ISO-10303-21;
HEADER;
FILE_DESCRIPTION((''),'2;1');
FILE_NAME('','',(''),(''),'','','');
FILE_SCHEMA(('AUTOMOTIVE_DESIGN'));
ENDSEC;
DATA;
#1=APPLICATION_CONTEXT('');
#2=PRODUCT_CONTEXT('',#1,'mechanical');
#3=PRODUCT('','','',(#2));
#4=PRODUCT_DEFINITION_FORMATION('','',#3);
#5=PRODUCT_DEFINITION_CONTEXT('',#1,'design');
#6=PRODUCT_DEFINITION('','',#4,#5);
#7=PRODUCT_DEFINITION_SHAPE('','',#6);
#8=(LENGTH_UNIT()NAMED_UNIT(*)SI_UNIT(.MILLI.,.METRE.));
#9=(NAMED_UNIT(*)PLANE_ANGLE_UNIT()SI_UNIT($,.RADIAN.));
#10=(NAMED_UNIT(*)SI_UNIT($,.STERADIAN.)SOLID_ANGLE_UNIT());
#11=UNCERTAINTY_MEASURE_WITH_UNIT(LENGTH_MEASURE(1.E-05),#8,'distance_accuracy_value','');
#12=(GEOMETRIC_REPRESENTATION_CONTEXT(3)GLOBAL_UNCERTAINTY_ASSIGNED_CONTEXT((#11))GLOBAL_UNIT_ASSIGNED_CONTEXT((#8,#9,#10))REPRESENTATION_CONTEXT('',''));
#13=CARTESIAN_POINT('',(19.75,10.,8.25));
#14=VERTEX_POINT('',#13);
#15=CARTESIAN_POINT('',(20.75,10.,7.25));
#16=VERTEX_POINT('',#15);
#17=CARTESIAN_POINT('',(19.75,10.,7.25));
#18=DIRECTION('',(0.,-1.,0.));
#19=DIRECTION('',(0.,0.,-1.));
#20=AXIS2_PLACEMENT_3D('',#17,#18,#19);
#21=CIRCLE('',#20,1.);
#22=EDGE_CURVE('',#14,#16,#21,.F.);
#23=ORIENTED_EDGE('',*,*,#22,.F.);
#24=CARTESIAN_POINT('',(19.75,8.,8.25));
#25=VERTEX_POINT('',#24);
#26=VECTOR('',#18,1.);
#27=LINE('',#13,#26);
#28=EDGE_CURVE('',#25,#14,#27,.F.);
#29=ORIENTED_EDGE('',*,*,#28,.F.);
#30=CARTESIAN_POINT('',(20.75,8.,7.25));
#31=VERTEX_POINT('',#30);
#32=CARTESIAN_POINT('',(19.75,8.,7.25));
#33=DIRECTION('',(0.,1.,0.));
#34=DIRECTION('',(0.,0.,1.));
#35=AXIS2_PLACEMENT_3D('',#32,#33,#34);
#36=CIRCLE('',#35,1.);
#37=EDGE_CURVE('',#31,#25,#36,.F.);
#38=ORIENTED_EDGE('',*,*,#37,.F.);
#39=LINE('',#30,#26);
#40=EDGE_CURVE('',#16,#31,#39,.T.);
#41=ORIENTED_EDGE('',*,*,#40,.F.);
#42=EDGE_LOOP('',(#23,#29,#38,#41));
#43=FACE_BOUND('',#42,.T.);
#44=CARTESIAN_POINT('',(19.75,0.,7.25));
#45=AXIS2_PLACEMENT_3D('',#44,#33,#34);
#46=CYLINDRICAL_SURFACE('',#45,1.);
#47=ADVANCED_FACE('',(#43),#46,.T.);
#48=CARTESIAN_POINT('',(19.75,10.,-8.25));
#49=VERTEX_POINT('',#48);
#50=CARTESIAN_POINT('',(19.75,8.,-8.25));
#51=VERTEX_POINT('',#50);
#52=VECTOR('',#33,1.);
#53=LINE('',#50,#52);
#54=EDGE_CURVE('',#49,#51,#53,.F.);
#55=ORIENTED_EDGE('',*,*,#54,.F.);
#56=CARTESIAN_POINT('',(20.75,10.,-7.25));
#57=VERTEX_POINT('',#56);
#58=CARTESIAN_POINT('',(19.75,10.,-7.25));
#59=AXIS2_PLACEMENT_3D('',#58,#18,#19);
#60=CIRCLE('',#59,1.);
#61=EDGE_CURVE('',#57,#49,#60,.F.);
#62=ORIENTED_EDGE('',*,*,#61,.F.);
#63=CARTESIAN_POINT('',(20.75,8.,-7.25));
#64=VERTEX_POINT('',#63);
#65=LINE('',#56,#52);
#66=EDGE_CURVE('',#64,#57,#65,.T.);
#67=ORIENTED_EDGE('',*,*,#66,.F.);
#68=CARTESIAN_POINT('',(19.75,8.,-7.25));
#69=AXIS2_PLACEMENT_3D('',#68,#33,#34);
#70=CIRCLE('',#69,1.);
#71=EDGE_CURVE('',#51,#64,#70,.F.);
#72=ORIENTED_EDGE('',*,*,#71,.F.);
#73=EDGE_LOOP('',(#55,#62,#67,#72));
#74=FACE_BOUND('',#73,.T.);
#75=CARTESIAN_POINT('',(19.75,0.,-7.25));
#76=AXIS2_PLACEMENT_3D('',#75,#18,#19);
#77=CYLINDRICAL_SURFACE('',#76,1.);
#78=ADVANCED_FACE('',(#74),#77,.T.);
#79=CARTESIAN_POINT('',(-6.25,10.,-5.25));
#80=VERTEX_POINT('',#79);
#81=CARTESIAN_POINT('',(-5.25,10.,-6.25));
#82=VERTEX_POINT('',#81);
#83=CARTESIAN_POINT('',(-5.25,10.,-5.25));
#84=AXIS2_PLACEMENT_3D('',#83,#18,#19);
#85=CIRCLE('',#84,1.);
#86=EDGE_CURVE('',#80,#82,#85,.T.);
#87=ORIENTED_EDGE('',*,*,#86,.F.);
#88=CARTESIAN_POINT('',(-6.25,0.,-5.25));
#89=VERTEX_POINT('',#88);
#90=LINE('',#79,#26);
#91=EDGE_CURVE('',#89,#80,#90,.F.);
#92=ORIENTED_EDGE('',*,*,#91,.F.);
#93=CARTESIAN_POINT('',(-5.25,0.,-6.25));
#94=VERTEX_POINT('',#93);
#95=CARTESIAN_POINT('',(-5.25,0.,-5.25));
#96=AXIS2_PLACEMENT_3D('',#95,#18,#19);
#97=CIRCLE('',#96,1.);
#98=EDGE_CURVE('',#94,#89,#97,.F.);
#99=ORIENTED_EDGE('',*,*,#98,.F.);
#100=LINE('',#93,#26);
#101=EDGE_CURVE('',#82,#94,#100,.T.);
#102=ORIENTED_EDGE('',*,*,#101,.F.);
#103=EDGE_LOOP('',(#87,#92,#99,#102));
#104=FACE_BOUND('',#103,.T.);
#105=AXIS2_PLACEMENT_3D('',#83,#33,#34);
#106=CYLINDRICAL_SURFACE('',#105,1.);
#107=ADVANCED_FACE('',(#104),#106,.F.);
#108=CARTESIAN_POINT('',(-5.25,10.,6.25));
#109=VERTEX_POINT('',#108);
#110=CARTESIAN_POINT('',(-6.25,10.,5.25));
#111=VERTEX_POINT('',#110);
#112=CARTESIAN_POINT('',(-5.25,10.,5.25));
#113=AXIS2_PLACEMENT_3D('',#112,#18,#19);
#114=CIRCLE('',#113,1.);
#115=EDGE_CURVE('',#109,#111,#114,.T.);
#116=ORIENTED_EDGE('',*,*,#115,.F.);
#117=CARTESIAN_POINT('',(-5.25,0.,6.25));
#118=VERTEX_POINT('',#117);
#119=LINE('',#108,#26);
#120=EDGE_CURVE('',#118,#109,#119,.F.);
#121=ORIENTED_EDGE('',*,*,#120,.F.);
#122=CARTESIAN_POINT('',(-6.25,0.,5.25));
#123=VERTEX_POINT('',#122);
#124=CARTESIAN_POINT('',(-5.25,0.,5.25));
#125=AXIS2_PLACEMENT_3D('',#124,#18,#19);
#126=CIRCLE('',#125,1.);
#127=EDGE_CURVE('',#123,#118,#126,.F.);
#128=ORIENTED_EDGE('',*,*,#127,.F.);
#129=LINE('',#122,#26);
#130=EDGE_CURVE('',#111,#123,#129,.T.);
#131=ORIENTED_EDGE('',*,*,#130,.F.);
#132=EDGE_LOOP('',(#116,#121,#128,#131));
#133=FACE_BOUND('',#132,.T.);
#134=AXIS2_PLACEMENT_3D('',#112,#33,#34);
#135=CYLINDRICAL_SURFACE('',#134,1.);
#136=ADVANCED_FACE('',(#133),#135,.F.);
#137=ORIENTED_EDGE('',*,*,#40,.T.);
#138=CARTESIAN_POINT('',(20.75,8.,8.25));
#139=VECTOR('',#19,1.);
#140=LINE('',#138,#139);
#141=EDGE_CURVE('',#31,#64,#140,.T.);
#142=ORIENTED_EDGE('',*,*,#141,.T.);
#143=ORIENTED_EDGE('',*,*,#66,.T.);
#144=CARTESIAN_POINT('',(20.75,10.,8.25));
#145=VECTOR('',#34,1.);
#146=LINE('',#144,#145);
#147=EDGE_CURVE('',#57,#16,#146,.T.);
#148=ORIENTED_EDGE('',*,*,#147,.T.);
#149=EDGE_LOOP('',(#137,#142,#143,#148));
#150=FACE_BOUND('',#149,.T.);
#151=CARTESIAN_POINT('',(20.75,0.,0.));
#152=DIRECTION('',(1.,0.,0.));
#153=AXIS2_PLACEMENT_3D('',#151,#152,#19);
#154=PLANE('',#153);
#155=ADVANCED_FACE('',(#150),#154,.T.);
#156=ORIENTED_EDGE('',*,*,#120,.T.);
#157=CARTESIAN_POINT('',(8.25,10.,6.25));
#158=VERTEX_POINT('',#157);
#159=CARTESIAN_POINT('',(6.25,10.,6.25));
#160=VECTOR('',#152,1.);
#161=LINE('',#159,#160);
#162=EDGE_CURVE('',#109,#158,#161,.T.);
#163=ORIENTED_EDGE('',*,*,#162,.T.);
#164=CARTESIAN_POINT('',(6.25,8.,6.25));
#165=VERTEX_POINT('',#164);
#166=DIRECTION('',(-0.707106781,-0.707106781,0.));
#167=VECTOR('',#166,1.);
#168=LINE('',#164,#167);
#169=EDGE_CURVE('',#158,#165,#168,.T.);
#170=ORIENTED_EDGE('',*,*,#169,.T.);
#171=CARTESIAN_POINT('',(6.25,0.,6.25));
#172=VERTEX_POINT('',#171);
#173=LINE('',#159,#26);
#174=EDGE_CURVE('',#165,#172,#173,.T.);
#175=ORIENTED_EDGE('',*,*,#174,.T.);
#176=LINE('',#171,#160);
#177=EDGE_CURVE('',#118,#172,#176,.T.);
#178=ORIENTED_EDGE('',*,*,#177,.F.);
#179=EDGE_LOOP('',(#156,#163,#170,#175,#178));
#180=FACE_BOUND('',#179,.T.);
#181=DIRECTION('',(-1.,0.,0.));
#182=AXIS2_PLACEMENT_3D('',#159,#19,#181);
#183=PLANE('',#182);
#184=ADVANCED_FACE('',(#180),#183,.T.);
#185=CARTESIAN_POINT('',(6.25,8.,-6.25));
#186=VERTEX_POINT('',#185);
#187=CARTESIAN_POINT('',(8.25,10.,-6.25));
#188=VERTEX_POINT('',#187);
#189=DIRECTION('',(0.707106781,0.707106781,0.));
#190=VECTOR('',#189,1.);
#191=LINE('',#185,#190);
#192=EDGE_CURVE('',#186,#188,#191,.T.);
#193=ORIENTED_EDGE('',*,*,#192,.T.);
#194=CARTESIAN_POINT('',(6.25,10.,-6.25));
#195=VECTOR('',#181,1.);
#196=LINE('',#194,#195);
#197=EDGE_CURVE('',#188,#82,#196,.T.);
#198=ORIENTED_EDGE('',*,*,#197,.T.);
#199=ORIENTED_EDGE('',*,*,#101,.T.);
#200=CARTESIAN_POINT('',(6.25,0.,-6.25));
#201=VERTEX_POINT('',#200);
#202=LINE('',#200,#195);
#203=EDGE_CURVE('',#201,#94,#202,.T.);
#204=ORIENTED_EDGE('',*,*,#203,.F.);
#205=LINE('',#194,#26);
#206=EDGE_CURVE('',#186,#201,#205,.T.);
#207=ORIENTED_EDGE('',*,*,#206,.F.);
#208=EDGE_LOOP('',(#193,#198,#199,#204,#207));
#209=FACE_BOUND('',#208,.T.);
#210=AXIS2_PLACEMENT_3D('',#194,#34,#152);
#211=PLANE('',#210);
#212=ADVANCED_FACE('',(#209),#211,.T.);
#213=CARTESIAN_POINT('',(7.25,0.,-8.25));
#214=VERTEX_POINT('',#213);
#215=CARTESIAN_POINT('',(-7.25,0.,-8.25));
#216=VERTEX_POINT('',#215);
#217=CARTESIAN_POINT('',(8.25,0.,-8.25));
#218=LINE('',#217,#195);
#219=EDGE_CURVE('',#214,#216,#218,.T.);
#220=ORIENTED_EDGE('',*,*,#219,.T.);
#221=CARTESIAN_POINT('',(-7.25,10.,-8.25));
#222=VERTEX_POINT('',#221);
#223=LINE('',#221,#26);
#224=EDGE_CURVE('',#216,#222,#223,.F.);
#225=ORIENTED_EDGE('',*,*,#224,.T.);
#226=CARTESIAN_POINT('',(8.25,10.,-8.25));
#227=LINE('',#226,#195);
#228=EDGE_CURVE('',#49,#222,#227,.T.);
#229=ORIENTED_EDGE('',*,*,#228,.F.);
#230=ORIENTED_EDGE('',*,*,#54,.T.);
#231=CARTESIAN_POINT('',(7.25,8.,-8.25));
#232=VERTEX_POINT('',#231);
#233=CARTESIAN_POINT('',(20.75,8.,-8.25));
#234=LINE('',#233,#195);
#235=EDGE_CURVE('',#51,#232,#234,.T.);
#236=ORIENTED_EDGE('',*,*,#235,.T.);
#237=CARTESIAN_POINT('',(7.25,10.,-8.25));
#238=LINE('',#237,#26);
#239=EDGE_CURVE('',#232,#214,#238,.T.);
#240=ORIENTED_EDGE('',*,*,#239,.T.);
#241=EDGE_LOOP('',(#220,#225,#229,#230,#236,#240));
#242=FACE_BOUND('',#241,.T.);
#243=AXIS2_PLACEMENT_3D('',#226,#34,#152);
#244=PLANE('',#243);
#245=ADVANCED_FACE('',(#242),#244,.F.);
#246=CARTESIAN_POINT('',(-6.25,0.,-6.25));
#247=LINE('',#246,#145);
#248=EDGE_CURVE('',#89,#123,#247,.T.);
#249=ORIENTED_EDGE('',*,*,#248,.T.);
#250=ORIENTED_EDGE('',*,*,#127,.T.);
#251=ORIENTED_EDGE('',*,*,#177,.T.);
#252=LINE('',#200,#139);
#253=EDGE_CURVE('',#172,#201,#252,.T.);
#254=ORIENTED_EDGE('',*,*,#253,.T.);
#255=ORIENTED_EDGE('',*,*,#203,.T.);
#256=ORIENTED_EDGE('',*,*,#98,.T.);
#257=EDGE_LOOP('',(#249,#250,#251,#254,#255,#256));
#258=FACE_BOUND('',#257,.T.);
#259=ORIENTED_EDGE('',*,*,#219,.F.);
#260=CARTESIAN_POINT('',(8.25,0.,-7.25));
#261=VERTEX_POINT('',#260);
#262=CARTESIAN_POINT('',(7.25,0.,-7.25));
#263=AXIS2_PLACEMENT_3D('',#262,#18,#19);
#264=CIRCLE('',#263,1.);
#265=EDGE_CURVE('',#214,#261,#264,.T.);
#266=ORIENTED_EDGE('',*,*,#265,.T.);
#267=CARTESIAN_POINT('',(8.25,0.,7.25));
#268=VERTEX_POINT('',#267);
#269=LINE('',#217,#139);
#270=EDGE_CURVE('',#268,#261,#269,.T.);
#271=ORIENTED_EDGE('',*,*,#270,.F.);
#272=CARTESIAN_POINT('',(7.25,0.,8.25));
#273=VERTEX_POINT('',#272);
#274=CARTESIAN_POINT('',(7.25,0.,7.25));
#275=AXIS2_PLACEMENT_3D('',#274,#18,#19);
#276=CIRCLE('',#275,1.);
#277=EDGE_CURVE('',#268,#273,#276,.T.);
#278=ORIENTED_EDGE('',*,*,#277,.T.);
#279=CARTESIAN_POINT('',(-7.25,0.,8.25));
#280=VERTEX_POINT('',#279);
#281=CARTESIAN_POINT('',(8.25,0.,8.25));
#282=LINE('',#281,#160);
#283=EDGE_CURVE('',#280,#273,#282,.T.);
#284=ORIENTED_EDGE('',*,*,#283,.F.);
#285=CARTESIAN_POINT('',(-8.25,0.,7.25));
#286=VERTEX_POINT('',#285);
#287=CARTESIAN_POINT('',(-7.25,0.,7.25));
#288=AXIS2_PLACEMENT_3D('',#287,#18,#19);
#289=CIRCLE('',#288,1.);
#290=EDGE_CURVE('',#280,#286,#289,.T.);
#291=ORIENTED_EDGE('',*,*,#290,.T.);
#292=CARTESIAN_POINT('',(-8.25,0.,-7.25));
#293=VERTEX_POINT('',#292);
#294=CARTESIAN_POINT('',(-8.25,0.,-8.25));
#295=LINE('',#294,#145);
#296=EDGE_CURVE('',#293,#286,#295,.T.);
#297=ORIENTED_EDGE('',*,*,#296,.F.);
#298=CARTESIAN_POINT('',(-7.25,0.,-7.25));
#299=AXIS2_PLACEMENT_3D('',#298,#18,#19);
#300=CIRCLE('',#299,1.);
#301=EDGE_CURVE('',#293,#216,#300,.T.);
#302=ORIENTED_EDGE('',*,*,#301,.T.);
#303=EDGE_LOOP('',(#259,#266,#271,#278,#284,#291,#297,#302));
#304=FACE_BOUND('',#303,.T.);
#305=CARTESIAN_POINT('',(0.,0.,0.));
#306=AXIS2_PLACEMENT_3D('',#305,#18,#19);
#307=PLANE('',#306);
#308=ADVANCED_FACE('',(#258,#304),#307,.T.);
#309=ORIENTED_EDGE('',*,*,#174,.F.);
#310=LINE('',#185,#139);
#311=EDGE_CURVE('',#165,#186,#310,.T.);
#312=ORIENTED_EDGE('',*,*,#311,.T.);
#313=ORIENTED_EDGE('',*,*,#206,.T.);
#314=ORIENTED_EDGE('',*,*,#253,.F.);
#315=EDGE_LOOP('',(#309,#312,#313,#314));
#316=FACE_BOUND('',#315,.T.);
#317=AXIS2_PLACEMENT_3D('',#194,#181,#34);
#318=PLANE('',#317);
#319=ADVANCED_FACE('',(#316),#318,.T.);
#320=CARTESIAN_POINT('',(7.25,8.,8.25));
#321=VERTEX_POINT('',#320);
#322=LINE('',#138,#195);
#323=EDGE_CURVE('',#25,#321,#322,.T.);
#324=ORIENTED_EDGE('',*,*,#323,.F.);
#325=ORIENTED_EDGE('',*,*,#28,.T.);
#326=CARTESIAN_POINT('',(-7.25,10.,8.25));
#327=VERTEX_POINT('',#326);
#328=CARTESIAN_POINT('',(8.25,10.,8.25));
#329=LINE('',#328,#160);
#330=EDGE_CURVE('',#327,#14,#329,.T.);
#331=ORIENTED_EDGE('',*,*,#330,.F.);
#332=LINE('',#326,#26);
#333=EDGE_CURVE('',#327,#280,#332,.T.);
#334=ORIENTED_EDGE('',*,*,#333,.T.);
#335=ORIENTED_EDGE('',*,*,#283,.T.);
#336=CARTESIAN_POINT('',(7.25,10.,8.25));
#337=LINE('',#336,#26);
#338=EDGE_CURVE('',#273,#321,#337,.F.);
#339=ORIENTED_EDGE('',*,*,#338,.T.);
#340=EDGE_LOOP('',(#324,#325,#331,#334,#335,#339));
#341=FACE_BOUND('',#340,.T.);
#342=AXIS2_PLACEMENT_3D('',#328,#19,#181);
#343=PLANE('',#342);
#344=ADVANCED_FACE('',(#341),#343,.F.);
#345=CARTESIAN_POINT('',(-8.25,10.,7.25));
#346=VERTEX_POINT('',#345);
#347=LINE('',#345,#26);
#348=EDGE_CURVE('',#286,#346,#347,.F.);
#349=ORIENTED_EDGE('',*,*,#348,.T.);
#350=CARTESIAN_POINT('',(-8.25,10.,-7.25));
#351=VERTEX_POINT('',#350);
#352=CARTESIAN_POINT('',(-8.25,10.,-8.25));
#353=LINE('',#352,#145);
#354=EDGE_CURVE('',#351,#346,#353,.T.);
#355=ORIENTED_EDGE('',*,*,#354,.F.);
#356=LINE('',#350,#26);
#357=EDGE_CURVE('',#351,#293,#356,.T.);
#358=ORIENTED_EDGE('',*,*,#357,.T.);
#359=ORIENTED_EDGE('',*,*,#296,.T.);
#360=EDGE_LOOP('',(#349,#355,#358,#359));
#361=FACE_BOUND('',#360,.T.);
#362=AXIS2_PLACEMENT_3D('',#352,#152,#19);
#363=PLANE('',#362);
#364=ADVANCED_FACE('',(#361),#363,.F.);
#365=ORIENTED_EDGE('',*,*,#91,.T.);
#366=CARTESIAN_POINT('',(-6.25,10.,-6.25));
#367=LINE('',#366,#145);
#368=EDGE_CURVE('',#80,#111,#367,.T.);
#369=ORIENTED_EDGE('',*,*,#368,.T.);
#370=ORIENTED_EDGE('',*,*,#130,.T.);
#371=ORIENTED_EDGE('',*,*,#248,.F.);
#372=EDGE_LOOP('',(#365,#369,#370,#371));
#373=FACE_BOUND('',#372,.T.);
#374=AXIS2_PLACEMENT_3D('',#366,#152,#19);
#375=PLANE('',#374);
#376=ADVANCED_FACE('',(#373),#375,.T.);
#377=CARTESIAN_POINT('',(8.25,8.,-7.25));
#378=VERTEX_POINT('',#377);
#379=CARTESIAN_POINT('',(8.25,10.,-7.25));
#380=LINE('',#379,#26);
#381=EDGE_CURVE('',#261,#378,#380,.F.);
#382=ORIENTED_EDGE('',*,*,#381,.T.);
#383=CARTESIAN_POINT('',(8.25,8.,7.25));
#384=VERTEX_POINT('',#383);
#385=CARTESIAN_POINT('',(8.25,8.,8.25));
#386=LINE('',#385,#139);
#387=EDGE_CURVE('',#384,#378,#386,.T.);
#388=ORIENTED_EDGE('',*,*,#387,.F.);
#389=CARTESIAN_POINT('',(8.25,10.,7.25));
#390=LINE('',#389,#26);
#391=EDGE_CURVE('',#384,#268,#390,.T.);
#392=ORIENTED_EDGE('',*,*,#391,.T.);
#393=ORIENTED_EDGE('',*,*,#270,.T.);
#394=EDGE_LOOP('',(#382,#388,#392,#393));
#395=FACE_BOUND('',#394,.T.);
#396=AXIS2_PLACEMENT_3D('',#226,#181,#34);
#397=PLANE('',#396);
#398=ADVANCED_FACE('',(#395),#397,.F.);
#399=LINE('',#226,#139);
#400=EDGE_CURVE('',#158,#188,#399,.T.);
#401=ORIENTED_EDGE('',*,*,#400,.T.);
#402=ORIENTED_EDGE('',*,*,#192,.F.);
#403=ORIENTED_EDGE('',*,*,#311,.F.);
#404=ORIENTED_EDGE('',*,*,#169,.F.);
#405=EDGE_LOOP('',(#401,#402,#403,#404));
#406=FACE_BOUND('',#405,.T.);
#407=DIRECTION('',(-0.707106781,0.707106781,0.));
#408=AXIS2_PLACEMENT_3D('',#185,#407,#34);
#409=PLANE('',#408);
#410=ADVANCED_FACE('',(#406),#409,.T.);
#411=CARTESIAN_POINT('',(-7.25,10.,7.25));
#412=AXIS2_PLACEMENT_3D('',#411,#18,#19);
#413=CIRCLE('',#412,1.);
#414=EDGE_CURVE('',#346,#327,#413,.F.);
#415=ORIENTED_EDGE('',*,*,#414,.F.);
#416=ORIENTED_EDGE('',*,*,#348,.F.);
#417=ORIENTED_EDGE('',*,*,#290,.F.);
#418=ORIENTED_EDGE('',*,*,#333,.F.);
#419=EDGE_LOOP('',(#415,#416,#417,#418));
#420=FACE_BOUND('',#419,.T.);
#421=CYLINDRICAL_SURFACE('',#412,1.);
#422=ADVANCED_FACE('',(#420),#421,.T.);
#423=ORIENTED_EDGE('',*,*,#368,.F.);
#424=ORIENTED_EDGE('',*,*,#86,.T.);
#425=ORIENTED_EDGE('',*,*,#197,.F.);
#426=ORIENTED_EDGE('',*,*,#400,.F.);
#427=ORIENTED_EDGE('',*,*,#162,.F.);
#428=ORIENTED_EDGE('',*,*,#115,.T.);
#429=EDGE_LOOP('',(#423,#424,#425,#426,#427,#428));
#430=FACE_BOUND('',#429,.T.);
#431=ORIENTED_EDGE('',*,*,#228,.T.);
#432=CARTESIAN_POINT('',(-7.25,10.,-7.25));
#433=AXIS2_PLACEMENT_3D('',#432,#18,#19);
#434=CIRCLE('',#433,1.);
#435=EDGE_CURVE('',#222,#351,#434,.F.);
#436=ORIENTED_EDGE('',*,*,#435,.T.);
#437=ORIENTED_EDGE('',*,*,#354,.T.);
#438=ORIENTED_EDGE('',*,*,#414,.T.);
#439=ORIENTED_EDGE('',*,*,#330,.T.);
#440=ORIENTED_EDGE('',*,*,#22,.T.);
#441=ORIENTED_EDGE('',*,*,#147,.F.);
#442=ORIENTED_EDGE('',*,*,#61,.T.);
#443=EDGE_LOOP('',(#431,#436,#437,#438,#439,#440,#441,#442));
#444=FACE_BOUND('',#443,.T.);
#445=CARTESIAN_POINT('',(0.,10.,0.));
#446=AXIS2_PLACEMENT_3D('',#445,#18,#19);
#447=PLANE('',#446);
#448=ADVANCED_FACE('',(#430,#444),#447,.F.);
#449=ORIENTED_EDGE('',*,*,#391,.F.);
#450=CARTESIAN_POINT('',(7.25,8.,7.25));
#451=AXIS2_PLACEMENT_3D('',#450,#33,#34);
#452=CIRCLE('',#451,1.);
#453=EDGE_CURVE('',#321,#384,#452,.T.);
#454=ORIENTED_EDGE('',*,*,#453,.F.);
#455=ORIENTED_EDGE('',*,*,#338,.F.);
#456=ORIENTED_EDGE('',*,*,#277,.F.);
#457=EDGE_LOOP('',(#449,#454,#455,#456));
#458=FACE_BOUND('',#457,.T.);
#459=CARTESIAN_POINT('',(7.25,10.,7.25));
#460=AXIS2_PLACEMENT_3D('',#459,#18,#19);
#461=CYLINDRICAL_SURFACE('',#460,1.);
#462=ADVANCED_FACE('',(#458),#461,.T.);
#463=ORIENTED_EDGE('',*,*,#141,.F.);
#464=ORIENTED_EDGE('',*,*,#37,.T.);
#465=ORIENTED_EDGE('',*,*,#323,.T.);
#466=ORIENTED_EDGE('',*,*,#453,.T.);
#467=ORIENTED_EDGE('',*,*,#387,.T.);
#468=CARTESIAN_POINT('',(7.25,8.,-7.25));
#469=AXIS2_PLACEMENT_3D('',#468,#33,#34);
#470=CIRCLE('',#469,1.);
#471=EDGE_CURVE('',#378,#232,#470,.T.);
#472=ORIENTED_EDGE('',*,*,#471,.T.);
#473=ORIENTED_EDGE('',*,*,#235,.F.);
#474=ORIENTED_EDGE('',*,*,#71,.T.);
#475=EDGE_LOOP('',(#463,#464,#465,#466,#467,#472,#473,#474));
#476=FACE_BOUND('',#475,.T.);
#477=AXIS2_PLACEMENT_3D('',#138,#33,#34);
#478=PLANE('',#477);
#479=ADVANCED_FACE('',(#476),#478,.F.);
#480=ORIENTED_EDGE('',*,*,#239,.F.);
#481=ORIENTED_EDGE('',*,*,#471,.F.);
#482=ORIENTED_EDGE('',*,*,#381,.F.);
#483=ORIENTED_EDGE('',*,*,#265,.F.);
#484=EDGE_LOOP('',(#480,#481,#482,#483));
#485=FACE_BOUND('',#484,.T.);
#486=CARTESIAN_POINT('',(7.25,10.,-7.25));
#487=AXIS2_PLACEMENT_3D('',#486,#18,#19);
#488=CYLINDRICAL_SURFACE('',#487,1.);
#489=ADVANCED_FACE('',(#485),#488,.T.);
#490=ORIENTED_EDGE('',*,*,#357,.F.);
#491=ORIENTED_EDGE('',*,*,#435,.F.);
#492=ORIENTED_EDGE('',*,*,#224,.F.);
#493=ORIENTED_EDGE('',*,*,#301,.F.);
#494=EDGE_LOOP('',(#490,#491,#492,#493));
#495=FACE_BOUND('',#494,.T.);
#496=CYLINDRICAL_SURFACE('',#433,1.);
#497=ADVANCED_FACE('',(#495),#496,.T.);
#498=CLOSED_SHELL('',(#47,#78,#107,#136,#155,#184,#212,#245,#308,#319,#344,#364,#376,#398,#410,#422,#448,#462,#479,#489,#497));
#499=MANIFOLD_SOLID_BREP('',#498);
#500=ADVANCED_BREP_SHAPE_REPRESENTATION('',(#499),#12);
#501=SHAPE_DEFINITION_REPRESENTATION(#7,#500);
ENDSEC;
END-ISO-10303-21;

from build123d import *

# Parameters (mm, degrees)
CROQUIS1_W              = 16.5
CROQUIS1_H              = 16.5
CROQUIS1_W_2            = 12.5
CROQUIS1_H_2            = 12.5
SALIENTE_EXTRUIR1_DEPTH = 10
CHAFL_N1_SIZE           = 2
CROQUIS2_W              = 16.5
CROQUIS2_H              = 2
SALIENTE_EXTRUIR2_DEPTH = 12.5
REDONDEO1_R             = 1


with BuildPart() as part:
    # Croquis1 → Saliente-Extruir1 (new body)
    with BuildSketch(Plane(origin=(0, 0, 0), x_dir=(1, 0, 0), z_dir=(0, 1, 0))):
        Rectangle(CROQUIS1_W, CROQUIS1_H)
        Rectangle(CROQUIS1_W_2, CROQUIS1_H_2, mode=Mode.SUBTRACT)
    extrude(amount=SALIENTE_EXTRUIR1_DEPTH)

    # Chaflán1
    chafl_n1_edges = [part.edges().sort_by_distance(p)[0] for p in [
        (6.25, 10, 0),
    ]]
    chamfer(chafl_n1_edges, length=CHAFL_N1_SIZE - 0.0001)  # a hair under: the kernel refuses the full size

    # Croquis2 → Saliente-Extruir2 (add)
    with BuildSketch(Plane(origin=(8.25, 0, 0), x_dir=(0, 0, -1), z_dir=(1, 0, 0))):
        with Locations((0, 9)):
            Rectangle(CROQUIS2_W, CROQUIS2_H)
    extrude(amount=SALIENTE_EXTRUIR2_DEPTH)

    # Redondeo1
    redondeo1_edges = [part.edges().sort_by_distance(p)[0] for p in [
        (-6.25, 5, -6.25),
        (-6.25, 5, 6.25),
        (8.25, 4, -8.25),
        (8.25, 4, 8.25),
        (20.75, 9, 8.25),
        (20.75, 9, -8.25),
        (-8.25, 5, -8.25),
        (-8.25, 5, 8.25),
    ]]
    fillet(redondeo1_edges, radius=REDONDEO1_R)


solid = part.part
